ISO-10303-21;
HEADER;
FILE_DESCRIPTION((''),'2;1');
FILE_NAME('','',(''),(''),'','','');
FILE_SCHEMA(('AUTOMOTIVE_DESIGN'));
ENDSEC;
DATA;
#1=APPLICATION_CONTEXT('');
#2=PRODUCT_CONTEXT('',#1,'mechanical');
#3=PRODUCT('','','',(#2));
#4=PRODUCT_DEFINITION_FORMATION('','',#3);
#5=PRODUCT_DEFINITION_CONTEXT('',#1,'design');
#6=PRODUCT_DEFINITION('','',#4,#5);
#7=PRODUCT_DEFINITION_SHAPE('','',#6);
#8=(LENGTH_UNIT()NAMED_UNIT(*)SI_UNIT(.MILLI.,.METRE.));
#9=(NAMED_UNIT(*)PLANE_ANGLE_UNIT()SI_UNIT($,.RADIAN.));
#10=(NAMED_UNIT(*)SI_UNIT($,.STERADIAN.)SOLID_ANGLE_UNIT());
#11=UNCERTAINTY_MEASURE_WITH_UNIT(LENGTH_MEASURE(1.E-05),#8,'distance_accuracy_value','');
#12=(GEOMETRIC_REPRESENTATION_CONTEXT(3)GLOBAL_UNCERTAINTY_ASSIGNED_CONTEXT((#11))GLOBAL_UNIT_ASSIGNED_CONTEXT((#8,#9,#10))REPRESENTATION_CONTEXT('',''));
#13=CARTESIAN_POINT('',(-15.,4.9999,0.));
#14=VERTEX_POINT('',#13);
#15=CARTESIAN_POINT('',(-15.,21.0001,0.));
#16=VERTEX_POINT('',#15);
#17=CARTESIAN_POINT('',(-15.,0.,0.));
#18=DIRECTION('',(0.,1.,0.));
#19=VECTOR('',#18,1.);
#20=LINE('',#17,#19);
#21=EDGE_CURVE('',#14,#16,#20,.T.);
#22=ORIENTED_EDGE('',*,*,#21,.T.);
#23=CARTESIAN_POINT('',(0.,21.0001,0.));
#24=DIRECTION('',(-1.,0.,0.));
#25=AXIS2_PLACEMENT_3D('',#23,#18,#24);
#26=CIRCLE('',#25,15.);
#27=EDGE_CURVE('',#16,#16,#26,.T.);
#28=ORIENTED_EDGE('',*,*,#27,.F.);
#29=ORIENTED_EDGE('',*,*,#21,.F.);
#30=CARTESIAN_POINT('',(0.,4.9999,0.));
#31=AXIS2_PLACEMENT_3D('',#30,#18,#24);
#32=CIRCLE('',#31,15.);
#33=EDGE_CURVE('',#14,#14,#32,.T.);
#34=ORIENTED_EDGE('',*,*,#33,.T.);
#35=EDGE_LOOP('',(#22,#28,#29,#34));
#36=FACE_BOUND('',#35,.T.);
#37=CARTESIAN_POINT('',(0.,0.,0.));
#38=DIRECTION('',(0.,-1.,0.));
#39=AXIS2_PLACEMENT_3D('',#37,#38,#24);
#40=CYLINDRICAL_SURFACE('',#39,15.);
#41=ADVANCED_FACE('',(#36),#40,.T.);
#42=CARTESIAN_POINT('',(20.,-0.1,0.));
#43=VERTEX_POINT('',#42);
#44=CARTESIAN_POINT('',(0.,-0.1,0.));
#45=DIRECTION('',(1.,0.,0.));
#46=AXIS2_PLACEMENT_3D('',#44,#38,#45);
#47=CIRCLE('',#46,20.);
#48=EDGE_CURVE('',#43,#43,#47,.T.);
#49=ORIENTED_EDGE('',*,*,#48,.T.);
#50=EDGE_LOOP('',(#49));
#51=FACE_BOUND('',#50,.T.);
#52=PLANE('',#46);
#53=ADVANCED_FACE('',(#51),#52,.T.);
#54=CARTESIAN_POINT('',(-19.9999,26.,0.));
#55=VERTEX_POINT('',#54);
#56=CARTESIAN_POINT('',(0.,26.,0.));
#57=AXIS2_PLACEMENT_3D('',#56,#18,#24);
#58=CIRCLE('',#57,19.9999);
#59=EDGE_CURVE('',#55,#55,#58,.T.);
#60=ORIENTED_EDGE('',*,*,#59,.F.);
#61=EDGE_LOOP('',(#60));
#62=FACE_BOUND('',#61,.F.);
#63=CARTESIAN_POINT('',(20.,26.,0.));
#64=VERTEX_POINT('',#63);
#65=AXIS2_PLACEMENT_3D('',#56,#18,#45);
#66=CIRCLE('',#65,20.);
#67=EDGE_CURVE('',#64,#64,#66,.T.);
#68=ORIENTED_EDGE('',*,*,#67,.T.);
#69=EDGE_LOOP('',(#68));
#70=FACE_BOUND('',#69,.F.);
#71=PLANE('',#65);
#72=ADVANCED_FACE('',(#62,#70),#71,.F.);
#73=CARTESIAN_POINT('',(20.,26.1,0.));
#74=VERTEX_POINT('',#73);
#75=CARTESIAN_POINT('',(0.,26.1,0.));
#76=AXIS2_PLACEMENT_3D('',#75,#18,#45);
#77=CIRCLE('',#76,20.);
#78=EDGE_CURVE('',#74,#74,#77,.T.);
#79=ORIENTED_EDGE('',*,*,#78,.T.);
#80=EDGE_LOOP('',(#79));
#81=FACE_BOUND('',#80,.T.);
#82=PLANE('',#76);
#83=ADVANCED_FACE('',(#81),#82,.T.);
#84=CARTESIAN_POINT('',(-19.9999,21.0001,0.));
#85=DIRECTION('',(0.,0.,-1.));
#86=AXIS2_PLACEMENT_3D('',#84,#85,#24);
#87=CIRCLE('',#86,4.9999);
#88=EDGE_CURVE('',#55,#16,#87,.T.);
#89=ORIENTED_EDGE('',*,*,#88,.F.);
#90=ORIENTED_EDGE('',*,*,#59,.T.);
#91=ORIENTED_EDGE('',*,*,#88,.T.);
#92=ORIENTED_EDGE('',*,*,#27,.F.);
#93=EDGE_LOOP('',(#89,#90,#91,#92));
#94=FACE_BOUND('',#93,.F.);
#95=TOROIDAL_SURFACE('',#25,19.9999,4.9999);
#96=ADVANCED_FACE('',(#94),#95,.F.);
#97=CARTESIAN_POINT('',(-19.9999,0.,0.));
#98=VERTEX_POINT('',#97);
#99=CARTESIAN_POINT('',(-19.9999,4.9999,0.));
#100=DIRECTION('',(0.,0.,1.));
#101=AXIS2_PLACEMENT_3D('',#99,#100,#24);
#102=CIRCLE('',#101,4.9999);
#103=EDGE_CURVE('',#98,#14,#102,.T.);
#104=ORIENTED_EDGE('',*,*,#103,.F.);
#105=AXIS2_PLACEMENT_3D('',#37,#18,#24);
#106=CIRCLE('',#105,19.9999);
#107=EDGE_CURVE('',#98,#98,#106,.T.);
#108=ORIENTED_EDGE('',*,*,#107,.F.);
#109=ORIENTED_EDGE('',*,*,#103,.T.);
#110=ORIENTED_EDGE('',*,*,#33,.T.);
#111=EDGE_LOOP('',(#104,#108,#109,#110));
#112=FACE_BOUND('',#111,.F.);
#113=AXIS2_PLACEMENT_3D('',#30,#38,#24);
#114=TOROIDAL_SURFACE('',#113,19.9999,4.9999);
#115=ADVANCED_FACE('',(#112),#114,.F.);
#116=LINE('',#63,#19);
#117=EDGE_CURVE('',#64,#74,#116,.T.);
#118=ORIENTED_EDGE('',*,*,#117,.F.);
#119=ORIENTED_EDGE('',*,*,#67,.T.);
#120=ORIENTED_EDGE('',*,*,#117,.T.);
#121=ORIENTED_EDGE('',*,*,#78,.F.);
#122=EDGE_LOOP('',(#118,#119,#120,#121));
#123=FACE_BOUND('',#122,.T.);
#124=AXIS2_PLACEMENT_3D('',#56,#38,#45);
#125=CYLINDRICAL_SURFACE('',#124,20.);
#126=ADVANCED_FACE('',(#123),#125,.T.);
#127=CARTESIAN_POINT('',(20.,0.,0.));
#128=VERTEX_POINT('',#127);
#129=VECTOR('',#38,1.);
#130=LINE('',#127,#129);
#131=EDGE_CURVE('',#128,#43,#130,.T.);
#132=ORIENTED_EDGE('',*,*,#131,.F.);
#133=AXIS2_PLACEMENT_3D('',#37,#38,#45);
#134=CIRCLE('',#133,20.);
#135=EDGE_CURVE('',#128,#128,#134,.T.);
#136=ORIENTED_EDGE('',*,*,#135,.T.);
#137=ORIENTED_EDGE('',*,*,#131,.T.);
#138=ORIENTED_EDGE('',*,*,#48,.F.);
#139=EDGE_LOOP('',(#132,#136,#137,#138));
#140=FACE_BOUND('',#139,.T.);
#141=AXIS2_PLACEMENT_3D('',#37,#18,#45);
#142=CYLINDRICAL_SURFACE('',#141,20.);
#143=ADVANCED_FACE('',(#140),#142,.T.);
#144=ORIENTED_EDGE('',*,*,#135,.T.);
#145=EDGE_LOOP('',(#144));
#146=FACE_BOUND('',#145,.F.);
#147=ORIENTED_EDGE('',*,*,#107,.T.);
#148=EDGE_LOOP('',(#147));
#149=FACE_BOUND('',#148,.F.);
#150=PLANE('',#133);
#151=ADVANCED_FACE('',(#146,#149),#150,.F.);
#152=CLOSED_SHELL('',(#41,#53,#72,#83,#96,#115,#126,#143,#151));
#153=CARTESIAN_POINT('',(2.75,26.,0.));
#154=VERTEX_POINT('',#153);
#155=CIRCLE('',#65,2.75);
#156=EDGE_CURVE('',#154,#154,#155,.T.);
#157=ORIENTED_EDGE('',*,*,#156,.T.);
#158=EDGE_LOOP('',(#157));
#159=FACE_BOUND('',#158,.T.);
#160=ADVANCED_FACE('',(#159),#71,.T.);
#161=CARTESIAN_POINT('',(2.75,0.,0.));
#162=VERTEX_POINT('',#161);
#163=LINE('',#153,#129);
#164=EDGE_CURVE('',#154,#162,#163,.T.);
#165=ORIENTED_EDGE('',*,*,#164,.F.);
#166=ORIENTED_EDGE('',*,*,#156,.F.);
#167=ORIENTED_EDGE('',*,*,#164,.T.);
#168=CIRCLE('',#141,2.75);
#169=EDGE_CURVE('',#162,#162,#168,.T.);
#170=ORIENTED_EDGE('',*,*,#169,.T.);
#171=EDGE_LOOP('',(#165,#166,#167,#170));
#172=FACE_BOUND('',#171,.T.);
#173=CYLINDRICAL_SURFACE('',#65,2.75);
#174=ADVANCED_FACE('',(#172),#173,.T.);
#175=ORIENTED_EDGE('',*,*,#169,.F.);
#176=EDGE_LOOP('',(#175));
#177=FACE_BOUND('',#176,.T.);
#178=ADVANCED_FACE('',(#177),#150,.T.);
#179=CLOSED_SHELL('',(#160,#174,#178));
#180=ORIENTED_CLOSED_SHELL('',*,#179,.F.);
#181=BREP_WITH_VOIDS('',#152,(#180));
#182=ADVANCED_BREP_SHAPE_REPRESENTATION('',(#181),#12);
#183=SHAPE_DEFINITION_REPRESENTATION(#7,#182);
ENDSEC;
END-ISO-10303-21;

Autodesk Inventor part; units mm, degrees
ref_plane "YZ Plane" through (0, 0, 0) normal (1, 0, 0) x (0, 1, 0)
ref_plane "XZ Plane" through (0, 0, 0) normal (0, 1, 0) x (-1, 0, 0)
ref_plane "XY Plane" through (0, 0, 0) normal (0, 0, 1) x (1, 0, 0)
sketch "Sketch1" plane through (0, 0, 0) normal (0, 1, 0) x (-1, 0, 0)
  circle A0 centre (0, 0) radius 15
  dimension "d0" = 30
extrude "Extrusion1" add sketch "Sketch1" along normal blind 26
sketch "Sketch2" plane through (0, 26, 0) normal (0, 1, 0) x (1, 0, 0)
  circle A0 centre (0, 0) radius 2.75
  dimension "d3" = 5.5
extrude "Extrusion2" cut sketch "Sketch2" against normal through all
sketch "Sketch3" plane through (0, 26, 0) normal (0, 1, 0) x (1, 0, 0)
  circle A0 centre (0, 0) radius 20
  dimension "d6" = 40
extrude "Extrusion3" add sketch "Sketch3" along normal blind 0.1
fillet "Fillet1" radius 5 1 edges at (15, 26, 0)
sketch "Sketch4" plane through (0, 0, 0) normal (0, -1, 0) x (1, 0, 0)
  circle A0 centre (0, 0) radius 20
  dimension "d10" = 40
extrude "Extrusion4" add sketch "Sketch4" along normal blind 0.1
fillet "Fillet2" radius 5 1 edges at (15, 0, 0)
properties part number "eje union engrane reductor"
